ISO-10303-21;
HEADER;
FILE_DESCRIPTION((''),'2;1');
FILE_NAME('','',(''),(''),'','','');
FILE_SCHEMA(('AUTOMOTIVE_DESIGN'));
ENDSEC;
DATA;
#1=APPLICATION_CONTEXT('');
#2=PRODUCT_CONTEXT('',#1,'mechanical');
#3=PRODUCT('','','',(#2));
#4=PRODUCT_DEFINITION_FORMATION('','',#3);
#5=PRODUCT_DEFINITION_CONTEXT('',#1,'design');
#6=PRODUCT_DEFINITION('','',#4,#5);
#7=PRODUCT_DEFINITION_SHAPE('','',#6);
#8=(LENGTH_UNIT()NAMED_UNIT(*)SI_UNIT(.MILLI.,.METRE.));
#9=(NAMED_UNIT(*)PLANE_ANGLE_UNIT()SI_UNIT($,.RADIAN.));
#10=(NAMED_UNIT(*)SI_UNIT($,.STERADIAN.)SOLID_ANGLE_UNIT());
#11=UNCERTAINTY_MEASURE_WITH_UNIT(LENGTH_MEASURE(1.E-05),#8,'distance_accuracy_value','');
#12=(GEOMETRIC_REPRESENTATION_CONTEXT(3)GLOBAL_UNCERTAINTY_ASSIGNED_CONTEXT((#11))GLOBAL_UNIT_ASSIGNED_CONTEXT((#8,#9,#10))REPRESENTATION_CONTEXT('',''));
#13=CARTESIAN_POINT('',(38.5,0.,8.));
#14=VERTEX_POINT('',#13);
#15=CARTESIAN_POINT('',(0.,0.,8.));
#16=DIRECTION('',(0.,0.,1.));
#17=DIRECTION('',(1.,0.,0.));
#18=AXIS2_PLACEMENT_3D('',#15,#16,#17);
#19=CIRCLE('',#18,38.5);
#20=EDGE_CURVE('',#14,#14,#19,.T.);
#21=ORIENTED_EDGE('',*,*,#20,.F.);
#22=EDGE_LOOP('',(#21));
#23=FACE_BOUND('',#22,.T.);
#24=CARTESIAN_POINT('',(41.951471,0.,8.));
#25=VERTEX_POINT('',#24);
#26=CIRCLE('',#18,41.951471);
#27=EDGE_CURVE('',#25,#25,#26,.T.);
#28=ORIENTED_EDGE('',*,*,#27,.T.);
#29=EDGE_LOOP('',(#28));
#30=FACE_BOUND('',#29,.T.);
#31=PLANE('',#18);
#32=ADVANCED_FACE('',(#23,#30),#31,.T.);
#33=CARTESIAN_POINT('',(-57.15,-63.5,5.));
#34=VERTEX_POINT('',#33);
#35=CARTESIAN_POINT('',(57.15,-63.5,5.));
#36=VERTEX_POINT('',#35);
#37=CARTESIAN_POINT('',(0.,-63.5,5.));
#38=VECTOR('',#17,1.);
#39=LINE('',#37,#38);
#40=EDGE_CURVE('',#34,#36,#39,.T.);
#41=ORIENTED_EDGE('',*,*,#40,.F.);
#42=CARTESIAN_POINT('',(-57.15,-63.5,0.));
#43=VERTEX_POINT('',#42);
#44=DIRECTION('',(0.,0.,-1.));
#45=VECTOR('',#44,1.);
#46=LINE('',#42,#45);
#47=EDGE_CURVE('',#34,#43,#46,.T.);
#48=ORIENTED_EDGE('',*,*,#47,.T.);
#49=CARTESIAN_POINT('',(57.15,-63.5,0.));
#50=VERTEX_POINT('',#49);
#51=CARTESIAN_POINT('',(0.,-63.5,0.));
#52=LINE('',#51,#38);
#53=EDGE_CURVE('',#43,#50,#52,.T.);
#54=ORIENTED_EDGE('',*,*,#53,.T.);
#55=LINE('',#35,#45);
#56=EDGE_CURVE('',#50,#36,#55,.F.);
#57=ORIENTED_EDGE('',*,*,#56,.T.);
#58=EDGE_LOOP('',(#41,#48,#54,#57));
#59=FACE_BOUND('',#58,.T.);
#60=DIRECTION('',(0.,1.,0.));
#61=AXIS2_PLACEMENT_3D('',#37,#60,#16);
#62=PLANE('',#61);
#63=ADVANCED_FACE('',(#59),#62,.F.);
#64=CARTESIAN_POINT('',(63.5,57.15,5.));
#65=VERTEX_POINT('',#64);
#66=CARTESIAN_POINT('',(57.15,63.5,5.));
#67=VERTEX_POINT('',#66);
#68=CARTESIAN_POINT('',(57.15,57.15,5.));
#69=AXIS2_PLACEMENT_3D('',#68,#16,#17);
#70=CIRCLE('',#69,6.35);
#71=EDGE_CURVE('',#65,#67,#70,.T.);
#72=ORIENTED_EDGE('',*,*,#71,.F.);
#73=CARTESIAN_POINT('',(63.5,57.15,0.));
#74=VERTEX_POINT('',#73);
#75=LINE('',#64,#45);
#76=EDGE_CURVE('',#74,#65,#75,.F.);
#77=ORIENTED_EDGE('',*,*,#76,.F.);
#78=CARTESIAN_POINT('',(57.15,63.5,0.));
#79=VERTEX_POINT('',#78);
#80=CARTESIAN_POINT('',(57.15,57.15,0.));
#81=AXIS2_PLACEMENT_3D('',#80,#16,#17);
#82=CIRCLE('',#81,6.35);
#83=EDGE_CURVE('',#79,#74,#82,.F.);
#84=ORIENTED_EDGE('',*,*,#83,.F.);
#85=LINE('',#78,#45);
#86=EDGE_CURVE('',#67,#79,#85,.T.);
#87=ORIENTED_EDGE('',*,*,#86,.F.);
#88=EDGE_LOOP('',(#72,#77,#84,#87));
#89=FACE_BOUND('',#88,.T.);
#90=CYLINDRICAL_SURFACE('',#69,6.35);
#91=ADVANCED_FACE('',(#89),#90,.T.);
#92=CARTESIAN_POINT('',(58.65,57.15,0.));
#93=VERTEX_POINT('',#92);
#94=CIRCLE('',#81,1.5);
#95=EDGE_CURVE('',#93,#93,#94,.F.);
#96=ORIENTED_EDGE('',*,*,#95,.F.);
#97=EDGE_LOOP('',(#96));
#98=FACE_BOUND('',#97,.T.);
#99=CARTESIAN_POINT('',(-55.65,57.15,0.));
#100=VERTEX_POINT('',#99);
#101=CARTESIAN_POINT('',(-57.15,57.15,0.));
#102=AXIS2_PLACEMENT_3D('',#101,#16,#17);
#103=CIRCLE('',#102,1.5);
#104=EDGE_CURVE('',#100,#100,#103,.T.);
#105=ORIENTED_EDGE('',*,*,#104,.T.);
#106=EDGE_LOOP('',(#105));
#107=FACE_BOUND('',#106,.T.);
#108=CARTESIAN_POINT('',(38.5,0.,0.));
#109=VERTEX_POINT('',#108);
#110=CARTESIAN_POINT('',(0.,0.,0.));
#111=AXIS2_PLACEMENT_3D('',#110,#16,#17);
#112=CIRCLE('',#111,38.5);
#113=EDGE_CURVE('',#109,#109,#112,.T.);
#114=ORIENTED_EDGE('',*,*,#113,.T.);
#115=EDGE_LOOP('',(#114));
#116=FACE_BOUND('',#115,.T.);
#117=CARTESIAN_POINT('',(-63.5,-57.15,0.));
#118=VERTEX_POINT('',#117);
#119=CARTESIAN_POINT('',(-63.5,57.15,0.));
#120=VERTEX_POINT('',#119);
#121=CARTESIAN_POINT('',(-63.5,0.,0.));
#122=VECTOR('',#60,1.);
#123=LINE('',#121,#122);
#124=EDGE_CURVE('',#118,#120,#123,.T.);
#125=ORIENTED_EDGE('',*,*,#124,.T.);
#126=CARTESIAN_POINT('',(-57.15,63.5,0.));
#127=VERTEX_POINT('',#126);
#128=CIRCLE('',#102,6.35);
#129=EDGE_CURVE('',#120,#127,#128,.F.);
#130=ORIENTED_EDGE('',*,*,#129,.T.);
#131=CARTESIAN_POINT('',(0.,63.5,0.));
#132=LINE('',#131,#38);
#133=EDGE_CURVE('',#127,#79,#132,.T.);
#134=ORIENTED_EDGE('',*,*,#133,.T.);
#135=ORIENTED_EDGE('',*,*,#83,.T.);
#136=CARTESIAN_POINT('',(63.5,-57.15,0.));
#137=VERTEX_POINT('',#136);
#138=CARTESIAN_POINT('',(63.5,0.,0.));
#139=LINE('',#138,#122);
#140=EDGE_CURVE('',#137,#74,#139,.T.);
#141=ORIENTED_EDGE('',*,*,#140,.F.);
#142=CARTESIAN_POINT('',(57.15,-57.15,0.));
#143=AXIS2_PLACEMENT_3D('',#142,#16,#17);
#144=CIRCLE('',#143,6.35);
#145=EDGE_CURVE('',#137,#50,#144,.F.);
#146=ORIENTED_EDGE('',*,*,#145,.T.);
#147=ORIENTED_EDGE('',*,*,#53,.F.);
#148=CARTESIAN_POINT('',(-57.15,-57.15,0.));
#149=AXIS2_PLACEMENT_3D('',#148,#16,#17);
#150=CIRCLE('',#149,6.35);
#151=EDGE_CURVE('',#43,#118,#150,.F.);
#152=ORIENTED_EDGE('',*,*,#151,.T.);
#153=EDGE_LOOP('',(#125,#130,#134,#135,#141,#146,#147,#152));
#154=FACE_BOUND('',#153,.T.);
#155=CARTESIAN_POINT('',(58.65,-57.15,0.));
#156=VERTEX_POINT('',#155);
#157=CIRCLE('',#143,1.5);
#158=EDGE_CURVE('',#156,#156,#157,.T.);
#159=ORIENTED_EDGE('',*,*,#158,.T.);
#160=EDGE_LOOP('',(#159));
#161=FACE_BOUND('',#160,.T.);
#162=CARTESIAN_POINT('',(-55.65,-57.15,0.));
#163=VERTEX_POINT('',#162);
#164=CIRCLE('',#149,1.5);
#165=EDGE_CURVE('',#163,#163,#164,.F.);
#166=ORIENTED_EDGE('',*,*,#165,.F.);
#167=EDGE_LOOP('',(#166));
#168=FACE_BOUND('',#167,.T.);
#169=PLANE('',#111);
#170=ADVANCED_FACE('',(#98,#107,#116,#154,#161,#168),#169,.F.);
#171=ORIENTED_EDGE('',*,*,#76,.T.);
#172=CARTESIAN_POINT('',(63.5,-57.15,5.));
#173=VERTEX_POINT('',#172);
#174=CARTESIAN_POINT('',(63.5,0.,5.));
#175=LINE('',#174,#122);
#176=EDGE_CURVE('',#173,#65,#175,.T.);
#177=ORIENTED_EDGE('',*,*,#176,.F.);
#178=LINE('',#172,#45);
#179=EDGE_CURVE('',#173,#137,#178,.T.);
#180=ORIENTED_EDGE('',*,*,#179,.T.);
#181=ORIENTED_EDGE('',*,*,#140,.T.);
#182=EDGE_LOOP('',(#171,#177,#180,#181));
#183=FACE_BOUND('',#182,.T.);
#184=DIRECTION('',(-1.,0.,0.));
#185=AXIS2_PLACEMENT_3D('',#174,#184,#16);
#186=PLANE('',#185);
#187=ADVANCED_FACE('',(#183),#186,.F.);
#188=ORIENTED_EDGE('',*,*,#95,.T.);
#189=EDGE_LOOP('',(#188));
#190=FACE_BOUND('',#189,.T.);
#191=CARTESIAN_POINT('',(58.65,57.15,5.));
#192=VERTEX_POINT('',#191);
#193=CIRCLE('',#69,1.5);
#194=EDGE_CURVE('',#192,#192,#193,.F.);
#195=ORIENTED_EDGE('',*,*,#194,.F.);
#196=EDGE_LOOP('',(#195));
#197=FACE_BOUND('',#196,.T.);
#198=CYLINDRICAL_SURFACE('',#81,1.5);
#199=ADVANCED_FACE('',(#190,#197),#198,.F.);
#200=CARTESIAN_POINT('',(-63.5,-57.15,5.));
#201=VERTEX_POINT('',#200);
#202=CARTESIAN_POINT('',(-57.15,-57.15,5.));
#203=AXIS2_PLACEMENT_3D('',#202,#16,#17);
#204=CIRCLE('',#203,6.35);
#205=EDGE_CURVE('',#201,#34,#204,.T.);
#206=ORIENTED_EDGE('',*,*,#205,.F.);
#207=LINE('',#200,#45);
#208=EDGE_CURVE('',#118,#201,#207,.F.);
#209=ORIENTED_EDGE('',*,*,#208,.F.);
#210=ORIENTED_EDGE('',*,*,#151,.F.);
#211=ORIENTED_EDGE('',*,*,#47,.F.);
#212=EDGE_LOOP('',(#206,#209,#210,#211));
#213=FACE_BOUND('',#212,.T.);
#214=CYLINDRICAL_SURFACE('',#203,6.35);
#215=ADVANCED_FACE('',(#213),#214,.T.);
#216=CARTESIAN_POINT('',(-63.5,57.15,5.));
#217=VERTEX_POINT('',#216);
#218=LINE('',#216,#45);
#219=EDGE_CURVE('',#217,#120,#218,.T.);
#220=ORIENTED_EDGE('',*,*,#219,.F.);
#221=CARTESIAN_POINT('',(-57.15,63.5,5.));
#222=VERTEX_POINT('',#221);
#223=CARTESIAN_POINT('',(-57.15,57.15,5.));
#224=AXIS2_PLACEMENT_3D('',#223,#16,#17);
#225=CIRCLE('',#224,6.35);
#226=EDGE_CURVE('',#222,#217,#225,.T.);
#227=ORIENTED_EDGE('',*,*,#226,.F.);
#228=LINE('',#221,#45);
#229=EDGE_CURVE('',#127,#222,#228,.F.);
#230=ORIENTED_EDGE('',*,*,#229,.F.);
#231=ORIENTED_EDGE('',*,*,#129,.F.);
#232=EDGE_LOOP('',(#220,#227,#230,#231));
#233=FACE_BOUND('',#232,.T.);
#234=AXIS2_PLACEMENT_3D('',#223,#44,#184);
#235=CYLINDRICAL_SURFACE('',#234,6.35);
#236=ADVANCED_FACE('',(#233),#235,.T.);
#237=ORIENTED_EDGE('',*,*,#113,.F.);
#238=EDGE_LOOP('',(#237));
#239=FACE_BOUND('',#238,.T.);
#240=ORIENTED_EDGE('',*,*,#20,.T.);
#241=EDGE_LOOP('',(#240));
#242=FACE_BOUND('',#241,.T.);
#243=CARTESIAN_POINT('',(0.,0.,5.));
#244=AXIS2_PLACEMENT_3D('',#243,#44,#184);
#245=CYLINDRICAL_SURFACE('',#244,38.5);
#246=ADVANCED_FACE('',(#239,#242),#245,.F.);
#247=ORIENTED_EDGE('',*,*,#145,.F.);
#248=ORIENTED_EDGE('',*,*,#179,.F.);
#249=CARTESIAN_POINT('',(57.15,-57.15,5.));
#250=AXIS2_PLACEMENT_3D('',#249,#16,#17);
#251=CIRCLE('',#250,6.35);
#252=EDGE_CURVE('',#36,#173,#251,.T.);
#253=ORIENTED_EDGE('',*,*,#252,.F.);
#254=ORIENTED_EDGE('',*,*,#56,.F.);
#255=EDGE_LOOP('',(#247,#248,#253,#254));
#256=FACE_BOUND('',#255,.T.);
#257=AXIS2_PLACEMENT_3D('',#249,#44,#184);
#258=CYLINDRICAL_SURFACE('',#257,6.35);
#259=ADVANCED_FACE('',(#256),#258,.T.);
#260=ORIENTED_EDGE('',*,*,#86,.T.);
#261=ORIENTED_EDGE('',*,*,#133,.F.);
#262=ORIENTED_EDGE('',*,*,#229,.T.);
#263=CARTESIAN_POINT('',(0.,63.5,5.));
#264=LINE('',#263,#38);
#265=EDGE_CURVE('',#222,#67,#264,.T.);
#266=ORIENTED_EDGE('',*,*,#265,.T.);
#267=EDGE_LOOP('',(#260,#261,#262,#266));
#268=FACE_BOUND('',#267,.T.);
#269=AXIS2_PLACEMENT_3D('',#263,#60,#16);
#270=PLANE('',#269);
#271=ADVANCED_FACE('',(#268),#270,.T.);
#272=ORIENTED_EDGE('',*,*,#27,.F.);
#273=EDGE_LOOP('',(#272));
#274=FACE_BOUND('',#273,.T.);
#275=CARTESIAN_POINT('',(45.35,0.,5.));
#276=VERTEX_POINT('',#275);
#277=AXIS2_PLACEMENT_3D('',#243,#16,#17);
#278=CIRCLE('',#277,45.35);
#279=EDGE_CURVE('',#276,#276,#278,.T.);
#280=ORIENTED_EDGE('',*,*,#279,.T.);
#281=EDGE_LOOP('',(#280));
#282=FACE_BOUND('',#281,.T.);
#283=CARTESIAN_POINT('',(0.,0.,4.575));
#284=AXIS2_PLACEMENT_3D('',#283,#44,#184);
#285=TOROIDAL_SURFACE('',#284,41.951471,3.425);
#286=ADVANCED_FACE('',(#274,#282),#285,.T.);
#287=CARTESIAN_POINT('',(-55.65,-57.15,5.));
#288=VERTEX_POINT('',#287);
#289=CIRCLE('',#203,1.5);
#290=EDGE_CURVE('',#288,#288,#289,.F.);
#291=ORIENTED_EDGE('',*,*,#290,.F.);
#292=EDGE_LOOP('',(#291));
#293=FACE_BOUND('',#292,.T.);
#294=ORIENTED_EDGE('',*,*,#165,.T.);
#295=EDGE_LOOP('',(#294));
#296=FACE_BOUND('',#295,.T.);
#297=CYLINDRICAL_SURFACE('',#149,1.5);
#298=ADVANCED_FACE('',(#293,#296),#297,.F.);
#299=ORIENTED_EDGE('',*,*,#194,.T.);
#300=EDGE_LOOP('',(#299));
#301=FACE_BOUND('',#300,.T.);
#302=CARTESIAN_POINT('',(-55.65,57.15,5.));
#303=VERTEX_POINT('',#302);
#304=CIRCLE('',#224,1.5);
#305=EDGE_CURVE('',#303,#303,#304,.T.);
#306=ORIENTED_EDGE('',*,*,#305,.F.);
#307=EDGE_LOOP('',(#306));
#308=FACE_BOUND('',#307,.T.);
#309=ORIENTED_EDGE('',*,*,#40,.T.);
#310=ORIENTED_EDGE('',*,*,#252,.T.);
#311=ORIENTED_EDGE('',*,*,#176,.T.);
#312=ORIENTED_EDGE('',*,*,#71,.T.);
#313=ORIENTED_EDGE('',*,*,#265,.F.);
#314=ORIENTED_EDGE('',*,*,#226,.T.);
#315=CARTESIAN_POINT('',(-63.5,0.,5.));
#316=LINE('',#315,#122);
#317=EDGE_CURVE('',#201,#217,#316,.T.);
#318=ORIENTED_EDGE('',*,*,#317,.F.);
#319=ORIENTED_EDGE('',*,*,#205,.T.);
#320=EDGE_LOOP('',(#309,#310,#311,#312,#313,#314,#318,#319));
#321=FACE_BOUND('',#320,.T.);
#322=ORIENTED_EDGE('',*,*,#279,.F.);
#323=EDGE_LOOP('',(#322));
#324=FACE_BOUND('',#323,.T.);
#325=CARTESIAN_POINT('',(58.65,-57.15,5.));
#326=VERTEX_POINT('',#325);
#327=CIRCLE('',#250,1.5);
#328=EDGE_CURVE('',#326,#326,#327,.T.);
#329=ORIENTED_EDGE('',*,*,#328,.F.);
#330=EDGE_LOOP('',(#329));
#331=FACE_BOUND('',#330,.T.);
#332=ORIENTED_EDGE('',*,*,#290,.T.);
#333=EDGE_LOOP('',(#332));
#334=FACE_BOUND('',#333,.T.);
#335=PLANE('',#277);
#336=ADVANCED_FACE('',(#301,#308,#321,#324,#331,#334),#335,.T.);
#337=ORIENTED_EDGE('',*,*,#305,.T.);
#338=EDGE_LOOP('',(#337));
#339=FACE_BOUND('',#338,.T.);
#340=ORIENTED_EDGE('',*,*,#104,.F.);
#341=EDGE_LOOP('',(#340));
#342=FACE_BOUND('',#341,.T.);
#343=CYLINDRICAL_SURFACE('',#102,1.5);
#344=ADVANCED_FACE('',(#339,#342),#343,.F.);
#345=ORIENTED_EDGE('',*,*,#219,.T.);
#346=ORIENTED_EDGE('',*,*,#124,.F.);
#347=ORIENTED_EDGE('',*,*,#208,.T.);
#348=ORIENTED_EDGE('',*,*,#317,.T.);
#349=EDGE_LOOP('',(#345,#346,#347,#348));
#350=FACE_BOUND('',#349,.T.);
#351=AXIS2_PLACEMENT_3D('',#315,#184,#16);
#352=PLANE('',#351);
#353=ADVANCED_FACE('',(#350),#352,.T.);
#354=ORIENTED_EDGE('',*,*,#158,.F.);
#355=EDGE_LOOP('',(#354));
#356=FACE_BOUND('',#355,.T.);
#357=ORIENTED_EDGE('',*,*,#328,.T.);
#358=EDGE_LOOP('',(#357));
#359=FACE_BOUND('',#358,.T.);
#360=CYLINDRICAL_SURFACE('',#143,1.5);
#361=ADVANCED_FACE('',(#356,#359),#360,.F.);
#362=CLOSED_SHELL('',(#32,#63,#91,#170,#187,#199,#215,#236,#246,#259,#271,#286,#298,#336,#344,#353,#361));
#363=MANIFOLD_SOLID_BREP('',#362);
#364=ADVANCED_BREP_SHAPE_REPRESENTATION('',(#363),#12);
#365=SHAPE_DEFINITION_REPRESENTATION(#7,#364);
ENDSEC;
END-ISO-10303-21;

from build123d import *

# Parameters (mm, degrees)
SKETCH1_W           = 127
SKETCH1_H           = 127
SKETCH1_W_2         = 121
SKETCH1_H_2         = 121
SKETCH1_R           = 38.5
BOSS_EXTRUDE1_DEPTH = 5
SKETCH3_R           = 45.35
SKETCH3_R_2         = 38.5
BOSS_EXTRUDE2_DEPTH = 3
FILLET1_R           = 6.35
FILLET2_R           = 3.425
SKETCH5_R           = 1.5
CUT_EXTRUDE2_DEPTH  = 90.94164775


with BuildPart() as part:
    # Sketch1 → Boss-Extrude1 (new body)
    # profile 1 of 2: a face of its own
    with BuildSketch(Plane.XY):
        Rectangle(SKETCH1_W, SKETCH1_H)
        Rectangle(SKETCH1_W_2, SKETCH1_H_2, mode=Mode.SUBTRACT)
    # profile 2 of 2: a face of its own
    with BuildSketch(Plane.XY):
        Rectangle(SKETCH1_W_2, SKETCH1_H_2)
        Circle(SKETCH1_R, mode=Mode.SUBTRACT)
    extrude(amount=BOSS_EXTRUDE1_DEPTH)

    # Sketch3 → Boss-Extrude2 (add)
    with BuildSketch(Plane.XY.offset(5)):
        Circle(SKETCH3_R)
        Circle(SKETCH3_R_2, mode=Mode.SUBTRACT)
    extrude(amount=BOSS_EXTRUDE2_DEPTH)

    # Fillet1
    fillet1_edges = [part.edges().sort_by_distance(p)[0] for p in [
        (-63.5, 63.5, 2.5),
        (63.5, 63.5, 2.5),
        (63.5, -63.5, 2.5),
        (-63.5, -63.5, 2.5),
    ]]
    fillet(fillet1_edges, radius=FILLET1_R)

    # Fillet2
    # the kernel refuses this fillet: 3.425 mm, written as the material it takes off along each edge
    with BuildSketch(Plane(origin=(0, 0, 8), x_dir=(1, 0, 0), z_dir=(0, -1, 0))) as fillet2_piece_1:
        with BuildLine():
            CenterArc((41.951470906, -3.425), FILLET2_R, 7.12806839, 82.87193161)
            Line((41.951470906, 0), (41.951470906, 0.0685))
            Line((41.951470906, 0.0685), (45.35, 0.0685))
            Line((45.35, 0.0685), (45.4185, 0))
            ThreePointArc((45.4185, 0), (45.4185, -1.5), (45.417970582, -2.9915))
            Line((45.417970582, -2.9915), (45.35, -3))
        make_face()
    revolve(axis=Axis((0, 0, 8), (0, 0, 1)), mode=Mode.SUBTRACT)

    # Sketch5 → Cut-Extrude2 (cut, through all)
    with BuildSketch(Plane.XY.offset(5)):
        with Locations((-57.15, 57.15)):
            Circle(SKETCH5_R)
        with Locations((-57.15, -57.15)):
            Circle(SKETCH5_R)
        with Locations((57.15, -57.15)):
            Circle(SKETCH5_R)
        with Locations((57.15, 57.15)):
            Circle(SKETCH5_R)
    extrude(amount=-CUT_EXTRUDE2_DEPTH, mode=Mode.SUBTRACT)


solid = part.part
